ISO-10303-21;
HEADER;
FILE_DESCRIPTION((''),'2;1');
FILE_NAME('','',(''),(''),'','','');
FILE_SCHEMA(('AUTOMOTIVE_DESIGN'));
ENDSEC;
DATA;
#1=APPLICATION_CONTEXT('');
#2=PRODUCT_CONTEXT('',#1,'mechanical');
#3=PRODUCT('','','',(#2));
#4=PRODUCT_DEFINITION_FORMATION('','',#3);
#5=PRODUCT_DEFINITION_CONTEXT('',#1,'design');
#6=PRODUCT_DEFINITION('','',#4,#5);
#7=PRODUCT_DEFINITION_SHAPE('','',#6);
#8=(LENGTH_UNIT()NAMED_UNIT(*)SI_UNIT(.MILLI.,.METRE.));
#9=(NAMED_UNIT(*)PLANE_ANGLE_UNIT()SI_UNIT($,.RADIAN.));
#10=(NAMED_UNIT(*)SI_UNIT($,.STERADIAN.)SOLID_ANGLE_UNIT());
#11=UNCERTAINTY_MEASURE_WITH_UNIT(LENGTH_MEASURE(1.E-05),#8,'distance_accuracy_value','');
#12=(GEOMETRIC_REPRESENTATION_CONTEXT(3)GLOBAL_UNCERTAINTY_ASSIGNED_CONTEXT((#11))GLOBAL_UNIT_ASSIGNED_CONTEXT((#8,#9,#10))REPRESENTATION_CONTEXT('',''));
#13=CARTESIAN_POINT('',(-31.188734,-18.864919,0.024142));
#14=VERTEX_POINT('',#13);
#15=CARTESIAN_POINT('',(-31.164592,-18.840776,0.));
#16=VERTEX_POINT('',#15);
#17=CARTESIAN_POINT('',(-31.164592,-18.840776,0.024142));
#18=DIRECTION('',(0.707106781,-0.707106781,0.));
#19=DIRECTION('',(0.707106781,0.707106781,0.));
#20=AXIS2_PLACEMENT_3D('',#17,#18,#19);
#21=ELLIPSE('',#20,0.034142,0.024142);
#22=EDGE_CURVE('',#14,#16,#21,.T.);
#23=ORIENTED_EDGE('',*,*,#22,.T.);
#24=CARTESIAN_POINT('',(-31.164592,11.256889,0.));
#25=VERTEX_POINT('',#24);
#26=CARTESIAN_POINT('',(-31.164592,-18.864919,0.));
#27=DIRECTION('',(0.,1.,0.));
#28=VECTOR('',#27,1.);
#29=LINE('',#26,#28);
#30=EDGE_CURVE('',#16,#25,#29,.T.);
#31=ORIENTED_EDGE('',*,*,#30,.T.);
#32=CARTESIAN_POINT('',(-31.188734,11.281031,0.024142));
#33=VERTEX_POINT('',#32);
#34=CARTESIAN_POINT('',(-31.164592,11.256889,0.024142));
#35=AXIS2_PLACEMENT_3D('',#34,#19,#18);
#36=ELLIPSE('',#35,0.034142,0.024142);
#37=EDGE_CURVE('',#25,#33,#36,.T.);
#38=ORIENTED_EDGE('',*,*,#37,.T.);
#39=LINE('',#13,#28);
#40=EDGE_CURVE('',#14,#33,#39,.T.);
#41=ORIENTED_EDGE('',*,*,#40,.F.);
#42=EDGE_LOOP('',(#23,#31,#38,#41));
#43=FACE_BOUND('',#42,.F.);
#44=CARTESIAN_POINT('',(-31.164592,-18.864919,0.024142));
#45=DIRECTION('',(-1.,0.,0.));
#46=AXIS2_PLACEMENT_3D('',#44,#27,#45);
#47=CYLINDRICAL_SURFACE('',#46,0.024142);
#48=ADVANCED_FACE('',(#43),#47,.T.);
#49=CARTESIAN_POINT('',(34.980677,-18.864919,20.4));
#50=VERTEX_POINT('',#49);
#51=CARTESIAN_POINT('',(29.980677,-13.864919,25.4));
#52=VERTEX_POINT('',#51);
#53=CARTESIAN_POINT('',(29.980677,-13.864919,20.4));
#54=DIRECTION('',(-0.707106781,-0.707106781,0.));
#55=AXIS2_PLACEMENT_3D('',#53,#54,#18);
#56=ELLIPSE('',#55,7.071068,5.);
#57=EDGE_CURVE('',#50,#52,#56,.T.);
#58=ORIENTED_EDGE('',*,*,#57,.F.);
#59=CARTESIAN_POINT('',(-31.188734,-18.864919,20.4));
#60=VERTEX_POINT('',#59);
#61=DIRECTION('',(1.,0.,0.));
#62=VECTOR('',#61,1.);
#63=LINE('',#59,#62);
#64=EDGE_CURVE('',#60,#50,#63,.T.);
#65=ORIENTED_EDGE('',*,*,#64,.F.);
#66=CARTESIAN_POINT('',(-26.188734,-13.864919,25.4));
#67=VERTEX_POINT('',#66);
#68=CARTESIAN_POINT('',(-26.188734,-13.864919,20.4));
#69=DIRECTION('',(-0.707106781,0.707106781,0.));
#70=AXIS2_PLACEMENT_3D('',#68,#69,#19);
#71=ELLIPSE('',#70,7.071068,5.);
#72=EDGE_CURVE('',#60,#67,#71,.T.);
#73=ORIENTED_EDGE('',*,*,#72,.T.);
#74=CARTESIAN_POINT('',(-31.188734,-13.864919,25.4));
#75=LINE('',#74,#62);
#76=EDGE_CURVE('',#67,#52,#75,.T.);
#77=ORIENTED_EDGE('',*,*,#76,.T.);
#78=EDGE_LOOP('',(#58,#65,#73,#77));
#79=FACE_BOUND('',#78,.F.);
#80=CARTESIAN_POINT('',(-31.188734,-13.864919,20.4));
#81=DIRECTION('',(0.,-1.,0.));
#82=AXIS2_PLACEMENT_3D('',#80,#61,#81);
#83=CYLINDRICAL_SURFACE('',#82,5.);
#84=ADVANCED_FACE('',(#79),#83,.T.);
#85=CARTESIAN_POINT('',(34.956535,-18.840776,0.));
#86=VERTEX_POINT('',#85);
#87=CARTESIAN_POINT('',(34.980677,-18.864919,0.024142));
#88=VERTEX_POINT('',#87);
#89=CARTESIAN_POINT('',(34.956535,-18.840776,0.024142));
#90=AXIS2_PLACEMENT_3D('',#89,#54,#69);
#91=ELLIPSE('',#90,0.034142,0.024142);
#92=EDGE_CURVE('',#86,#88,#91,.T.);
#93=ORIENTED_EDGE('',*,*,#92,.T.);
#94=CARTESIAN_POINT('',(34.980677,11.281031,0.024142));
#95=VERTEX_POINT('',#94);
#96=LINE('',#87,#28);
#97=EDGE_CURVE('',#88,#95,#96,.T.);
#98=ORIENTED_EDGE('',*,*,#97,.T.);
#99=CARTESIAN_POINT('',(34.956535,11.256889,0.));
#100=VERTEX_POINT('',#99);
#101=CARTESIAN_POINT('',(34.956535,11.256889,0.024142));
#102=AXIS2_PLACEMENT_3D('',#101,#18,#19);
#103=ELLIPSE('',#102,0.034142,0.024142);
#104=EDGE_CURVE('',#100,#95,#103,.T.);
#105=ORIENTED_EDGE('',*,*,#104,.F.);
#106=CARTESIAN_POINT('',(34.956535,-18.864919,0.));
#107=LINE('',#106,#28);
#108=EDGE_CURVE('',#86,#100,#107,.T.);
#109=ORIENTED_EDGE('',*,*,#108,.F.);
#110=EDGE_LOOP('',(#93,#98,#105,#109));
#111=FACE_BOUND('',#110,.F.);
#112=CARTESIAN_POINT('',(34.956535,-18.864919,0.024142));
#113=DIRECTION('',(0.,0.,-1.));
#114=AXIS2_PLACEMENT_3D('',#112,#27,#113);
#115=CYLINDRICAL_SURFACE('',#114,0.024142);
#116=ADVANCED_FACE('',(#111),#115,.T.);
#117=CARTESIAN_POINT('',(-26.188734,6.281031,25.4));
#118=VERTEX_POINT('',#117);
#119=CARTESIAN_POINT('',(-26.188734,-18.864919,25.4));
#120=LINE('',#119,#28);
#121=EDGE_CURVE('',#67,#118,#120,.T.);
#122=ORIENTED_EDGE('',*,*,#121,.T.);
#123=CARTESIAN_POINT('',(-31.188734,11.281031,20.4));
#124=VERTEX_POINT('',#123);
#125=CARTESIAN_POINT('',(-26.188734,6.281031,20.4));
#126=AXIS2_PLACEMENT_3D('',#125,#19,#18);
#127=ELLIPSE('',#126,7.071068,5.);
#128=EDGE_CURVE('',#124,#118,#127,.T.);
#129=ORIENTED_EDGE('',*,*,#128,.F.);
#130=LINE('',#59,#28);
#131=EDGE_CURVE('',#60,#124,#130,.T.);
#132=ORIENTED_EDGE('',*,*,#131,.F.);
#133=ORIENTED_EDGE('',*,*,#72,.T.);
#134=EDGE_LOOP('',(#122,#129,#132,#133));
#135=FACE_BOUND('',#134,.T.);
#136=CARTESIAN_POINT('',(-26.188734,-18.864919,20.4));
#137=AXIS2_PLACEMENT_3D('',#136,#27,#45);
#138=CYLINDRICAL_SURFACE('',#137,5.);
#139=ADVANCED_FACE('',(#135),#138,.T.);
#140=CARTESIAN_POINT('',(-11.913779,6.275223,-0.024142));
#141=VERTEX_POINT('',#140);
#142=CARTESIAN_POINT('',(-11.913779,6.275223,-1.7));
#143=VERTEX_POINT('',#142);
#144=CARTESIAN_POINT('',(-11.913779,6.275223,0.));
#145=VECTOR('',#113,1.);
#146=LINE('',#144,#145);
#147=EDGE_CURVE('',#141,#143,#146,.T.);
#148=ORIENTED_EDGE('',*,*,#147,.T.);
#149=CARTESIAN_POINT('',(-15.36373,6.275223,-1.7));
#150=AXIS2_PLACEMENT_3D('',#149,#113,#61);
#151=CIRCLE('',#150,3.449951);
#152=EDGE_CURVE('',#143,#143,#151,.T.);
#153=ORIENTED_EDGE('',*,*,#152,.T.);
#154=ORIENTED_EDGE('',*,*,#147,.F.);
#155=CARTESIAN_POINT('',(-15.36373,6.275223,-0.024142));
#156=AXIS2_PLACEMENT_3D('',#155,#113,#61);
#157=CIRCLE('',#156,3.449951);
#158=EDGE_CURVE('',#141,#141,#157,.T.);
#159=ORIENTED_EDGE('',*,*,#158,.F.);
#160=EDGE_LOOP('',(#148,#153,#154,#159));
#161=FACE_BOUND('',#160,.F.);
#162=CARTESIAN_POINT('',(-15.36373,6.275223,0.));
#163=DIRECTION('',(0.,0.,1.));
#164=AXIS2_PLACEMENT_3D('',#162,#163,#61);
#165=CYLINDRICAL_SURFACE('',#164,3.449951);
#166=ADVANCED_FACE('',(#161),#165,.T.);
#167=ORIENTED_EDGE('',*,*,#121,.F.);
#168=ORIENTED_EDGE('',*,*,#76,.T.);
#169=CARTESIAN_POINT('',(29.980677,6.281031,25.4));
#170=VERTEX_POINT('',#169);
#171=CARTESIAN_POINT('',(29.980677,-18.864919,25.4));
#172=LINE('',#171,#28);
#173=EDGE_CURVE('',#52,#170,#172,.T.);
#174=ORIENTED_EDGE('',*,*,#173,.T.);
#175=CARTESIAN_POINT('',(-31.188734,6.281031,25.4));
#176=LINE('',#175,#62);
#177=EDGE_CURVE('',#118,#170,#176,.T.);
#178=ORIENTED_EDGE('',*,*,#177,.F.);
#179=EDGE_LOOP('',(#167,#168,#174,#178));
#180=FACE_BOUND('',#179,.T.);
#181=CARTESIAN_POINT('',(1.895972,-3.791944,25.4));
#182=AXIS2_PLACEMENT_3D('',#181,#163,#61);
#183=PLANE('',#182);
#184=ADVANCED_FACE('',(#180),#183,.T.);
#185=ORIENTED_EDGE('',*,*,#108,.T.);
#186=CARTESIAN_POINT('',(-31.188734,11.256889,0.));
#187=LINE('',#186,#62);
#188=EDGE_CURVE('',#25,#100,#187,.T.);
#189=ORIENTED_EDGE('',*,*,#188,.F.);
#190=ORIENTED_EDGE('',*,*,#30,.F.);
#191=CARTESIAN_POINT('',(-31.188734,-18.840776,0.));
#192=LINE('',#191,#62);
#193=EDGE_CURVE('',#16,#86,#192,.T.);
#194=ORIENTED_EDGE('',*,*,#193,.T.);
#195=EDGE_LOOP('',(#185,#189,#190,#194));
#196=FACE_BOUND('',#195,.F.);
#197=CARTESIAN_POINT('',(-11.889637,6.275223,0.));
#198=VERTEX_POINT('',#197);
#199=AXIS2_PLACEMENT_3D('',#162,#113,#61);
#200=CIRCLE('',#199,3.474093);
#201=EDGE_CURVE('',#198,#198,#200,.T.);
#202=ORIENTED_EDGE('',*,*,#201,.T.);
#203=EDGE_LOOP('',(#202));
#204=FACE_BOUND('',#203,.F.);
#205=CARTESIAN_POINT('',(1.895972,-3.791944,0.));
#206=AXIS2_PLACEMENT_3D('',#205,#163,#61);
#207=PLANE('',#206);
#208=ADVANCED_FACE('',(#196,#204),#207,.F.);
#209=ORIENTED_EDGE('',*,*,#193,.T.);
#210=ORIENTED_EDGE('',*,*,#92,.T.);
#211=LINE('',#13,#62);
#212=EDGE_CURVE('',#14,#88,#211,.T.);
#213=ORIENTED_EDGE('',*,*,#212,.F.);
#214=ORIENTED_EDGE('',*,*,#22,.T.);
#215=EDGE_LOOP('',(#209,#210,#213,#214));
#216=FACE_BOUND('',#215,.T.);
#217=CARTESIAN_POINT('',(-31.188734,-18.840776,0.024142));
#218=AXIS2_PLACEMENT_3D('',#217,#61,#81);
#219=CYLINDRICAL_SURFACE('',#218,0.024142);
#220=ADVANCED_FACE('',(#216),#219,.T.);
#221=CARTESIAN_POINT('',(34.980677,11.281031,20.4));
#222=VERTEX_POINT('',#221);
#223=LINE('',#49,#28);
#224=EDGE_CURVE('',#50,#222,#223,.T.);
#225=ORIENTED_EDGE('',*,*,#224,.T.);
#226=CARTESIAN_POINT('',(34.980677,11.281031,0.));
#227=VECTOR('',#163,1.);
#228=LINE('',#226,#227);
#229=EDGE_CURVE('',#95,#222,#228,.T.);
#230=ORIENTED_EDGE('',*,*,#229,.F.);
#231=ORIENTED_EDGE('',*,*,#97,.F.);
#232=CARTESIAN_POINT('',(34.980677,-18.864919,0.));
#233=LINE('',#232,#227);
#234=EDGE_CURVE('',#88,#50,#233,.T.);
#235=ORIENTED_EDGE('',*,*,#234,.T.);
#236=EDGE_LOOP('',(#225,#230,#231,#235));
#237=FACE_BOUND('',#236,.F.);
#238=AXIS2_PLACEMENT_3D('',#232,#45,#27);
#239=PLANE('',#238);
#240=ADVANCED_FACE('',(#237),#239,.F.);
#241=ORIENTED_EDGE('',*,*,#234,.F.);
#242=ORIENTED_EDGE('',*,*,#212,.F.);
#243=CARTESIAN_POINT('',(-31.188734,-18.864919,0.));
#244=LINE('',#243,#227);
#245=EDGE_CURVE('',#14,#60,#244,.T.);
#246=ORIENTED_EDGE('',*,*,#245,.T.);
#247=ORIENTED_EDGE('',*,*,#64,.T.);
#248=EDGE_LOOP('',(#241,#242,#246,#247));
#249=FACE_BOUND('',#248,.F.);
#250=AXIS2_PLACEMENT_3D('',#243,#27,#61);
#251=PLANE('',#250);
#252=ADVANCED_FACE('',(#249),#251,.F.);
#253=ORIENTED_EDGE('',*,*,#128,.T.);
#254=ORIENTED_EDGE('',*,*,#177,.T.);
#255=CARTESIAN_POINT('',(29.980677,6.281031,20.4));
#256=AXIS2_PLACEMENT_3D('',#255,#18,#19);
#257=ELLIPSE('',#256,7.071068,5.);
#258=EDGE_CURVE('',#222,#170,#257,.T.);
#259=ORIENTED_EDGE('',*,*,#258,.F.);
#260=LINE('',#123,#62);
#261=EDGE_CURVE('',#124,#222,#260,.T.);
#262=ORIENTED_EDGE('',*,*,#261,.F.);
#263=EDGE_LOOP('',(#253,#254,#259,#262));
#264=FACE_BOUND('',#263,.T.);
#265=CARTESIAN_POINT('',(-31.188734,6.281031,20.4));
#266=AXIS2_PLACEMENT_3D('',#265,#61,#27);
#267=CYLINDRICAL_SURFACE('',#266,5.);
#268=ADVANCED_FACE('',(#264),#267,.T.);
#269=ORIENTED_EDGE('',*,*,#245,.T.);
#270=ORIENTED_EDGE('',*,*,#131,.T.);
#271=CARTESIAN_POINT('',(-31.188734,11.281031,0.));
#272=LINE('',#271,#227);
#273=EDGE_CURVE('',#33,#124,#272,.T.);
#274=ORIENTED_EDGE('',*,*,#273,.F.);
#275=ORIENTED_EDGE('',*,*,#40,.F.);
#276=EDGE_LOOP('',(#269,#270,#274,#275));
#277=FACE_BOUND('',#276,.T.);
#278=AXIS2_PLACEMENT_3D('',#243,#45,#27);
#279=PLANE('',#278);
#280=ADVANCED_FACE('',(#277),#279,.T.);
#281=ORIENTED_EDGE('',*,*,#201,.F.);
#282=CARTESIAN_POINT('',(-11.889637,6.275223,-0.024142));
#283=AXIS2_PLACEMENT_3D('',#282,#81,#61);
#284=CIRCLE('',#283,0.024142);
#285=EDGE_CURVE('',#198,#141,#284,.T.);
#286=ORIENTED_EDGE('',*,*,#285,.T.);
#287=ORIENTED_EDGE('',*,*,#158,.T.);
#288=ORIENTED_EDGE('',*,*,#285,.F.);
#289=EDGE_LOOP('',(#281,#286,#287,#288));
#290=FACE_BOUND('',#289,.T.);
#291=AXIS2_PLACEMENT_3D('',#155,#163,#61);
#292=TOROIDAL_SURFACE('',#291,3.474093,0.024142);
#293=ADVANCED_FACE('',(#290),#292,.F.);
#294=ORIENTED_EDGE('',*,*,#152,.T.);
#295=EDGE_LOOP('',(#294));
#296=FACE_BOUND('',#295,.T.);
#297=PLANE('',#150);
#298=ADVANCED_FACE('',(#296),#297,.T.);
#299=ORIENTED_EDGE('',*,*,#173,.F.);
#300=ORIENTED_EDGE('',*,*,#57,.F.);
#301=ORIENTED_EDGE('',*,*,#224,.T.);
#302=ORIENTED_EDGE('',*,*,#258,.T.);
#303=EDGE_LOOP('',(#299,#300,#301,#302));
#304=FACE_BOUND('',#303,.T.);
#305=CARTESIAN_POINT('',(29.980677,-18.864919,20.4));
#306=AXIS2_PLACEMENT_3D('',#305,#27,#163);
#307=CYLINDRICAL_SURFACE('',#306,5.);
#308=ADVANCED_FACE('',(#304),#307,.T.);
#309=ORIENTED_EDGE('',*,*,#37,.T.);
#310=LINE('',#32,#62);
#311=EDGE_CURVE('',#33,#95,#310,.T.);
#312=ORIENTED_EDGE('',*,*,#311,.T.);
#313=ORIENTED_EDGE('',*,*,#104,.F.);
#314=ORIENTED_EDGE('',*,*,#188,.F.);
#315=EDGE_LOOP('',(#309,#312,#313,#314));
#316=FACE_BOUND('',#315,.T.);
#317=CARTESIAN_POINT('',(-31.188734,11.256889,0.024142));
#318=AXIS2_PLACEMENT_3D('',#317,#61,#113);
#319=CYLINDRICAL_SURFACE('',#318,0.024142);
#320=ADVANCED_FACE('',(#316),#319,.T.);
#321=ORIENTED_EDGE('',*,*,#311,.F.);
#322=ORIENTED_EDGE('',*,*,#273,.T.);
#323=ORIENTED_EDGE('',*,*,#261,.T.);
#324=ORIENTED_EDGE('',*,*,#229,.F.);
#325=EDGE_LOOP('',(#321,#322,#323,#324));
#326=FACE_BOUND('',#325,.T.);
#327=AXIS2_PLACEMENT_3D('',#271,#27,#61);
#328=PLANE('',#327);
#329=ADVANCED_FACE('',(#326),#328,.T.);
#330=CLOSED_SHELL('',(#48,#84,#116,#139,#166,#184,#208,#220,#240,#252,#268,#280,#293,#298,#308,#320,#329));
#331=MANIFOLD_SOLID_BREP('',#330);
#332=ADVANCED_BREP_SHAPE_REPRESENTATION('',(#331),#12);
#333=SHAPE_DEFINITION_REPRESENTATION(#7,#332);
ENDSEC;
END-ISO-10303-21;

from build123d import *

# Parameters (mm, degrees)
F0_W     = 66.169410944
F0_H     = 30.1459496841
F1_DEPTH = 25.4
F6_R     = 3.4499508962
F7_DEPTH = 1.7
F8_R     = 5
F9_R     = 0.0241421356


# Not quite as in the source:
# - the program builds the solid bodies; features that only make, move or delete a surface that nothing else refers to are left out


with BuildPart() as f1:
    # F0 (on Top) → F1 (new body)
    with BuildSketch(Plane.XY):
        with Locations((1.8959715962, -3.7919436581)):
            Rectangle(F0_W, F0_H)
    extrude(amount=F1_DEPTH)

    # F6 (on face) → F7 (join)
    with BuildSketch(Plane(origin=(0, 0, 0), x_dir=(1, 0, 0), z_dir=(0, 0, -1))):
        with Locations((-15.3637295589, -6.2752226368)):
            Circle(F6_R)
    extrude(amount=F7_DEPTH)

    # F8
    f8_edges = [f1.edges().sort_by_distance(p)[0] for p in [
        (1.895972, 11.281031, 25.4),
        (-31.188734, -3.791944, 25.4),
        (1.895972, -18.864919, 25.4),
        (34.980677, -3.791944, 25.4),
    ]]
    fillet(f8_edges, radius=F8_R)

    # F9
    f9_edges = [f1.edges().sort_by_distance(p)[0] for p in [
        (1.895972, 11.281031, 0),
        (34.980677, -3.791944, 0),
        (-31.188734, -3.791944, 0),
        (1.895972, -18.864919, 0),
        (-18.81368, 6.275223, 0),
    ]]
    fillet(f9_edges, radius=F9_R)


solid = f1.part
